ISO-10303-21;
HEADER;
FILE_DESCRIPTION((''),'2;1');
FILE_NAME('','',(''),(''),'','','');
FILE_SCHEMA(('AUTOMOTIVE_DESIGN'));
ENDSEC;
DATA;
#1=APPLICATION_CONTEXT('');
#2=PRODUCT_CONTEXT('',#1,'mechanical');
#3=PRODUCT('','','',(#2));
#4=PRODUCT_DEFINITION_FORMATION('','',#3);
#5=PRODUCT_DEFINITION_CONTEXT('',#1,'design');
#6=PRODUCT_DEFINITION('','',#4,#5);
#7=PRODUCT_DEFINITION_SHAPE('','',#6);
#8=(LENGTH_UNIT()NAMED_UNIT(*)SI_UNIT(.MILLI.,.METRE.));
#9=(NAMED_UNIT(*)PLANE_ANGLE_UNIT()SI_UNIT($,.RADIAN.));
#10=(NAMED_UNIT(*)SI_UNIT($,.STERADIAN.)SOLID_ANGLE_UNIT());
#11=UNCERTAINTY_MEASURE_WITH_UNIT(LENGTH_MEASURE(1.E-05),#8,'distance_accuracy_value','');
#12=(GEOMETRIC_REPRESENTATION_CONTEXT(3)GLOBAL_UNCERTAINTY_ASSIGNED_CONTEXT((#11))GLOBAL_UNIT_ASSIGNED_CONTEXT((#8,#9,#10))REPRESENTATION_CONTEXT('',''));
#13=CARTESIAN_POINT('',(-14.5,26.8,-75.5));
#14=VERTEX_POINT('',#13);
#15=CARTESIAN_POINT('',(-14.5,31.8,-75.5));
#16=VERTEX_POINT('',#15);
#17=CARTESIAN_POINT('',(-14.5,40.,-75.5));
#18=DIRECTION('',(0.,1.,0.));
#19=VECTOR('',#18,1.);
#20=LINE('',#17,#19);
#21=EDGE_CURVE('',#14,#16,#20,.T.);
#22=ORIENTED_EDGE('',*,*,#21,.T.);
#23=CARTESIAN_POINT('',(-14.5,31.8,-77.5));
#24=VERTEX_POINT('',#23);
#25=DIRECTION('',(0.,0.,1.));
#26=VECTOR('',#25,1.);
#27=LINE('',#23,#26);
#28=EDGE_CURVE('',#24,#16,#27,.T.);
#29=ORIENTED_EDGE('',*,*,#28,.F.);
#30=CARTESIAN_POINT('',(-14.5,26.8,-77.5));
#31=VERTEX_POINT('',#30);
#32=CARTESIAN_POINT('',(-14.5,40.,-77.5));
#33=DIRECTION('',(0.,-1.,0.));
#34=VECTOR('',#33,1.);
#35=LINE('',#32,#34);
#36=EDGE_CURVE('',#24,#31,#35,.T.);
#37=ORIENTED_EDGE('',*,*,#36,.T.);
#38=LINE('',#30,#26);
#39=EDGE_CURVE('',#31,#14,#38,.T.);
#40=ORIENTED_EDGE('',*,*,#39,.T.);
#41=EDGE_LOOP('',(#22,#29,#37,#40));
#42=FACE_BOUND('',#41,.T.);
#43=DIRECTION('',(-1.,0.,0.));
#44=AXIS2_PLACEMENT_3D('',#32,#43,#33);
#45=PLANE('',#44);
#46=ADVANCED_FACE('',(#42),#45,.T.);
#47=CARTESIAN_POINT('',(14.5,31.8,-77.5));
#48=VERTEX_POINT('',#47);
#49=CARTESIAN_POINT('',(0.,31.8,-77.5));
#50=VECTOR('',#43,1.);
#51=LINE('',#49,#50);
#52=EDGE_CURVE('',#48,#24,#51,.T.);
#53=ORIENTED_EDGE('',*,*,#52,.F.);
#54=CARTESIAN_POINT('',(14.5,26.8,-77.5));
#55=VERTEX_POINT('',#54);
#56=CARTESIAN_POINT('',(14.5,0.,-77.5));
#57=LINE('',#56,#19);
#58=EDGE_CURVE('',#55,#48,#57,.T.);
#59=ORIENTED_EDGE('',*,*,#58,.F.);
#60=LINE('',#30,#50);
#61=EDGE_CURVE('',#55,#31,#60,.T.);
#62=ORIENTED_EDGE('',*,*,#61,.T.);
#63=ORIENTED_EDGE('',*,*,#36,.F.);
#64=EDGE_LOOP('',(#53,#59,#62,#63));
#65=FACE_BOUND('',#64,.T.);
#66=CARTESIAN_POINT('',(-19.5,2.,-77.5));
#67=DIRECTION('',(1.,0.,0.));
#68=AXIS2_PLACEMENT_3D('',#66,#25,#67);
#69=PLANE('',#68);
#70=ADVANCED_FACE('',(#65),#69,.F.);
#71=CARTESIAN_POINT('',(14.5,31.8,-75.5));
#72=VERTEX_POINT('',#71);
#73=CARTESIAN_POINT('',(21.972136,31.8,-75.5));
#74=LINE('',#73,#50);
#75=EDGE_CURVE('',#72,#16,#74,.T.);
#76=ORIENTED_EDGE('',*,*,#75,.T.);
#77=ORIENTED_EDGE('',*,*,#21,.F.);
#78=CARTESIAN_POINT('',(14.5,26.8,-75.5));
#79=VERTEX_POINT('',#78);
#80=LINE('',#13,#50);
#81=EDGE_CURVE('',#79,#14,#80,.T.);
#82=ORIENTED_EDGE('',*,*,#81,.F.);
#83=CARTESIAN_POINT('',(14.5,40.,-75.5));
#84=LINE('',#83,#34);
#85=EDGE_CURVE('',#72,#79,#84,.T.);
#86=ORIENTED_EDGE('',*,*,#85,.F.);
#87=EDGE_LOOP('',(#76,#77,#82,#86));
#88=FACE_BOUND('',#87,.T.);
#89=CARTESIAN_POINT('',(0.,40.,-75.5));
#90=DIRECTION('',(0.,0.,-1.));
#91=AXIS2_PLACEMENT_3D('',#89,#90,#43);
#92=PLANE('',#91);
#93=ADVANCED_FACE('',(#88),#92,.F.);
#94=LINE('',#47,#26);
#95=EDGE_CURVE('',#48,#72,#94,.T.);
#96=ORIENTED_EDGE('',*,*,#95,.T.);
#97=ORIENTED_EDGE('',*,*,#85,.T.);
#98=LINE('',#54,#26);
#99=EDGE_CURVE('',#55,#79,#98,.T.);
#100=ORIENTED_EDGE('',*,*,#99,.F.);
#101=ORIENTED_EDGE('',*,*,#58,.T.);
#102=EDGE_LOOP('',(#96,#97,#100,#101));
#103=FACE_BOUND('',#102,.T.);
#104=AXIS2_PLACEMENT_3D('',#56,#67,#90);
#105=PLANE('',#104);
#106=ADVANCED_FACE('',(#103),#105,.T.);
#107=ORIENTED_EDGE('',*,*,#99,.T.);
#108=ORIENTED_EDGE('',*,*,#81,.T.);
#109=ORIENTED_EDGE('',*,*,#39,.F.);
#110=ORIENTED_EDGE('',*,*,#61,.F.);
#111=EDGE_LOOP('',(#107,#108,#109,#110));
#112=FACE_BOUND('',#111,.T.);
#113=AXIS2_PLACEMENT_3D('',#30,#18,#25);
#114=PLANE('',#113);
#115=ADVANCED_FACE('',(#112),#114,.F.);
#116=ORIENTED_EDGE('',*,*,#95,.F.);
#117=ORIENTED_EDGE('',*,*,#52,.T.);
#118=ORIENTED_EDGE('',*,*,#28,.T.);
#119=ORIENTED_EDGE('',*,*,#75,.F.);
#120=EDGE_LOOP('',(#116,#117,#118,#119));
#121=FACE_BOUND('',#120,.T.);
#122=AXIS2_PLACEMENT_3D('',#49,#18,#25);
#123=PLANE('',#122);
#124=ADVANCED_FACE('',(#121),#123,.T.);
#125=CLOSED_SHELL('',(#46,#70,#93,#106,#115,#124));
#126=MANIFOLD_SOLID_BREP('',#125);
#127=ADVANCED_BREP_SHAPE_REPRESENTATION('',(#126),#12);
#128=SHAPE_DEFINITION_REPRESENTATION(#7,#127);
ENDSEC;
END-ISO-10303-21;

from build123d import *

# Parameters (mm, degrees)
SKETCH1_W                       = 39
SKETCH1_H                       = 155
BOSS_EXTRUDE1_DEPTH             = 2
BOSS_EXTRUDE2_DEPTH             = 38
SKETCH3_W                       = 2
SKETCH3_H                       = 2
BOSS_EXTRUDE3_DEPTH             = 38
SKETCH4_W                       = 2
SKETCH4_H                       = 2
BOSS_EXTRUDE4_DEPTH             = 151
SKETCH6_W                       = 35
SKETCH6_H                       = 2.2
CUT_EXTRUDE1_DEPTH              = 160.340045186
SKETCH7_W                       = 35
SKETCH7_H                       = 2.2
CUT_EXTRUDE2_DEPTH              = 89.490112442
SKETCH5_W                       = 31
SKETCH5_H                       = 2
BOSS_EXTRUDE5_DEPTH             = 2
BOSS_EXTRUDE6_REACH             = 91.367
SKETCH8_W                       = 2
SKETCH8_H                       = 2
BOSS_EXTRUDE6_DIRECTION_2_REACH = 91.367
SKETCH10_W                      = 2
SKETCH10_H                      = 2.2
SKETCH10_W_2                    = 2.2
SKETCH10_H_2                    = 2
BOSS_EXTRUDE8_DEPTH             = 2
SKETCH11_W                      = 2
SKETCH11_H                      = 2.2
SKETCH11_W_2                    = 2.2
SKETCH11_H_2                    = 2
BOSS_EXTRUDE9_DEPTH             = 2
FILLET2_R                       = 2.5
SKETCH14_W                      = 36.5
SKETCH14_H                      = 7.75
BOSS_EXTRUDE10_DEPTH            = 2
SKETCH13_W                      = 31
SKETCH13_H                      = 3
CUT_EXTRUDE4_DEPTH              = 2
FILLET3_R                       = 2
FILLET4_R                       = 0.5
SKETCH15_R                      = 5.1
CUT_EXTRUDE5_DEPTH              = 90.367219941
SKETCH16_R                      = 7.1
BOSS_EXTRUDE11_DEPTH            = 1
FILLET5_R                       = 0.5
FILLET7_R                       = 0.5
CUT_EXTRUDE6_DEPTH              = 6
SKETCH18_W                      = 29
SKETCH18_H                      = 3
CUT_EXTRUDE8_DEPTH              = 90.367219986
CUT_EXTRUDE11_DEPTH             = 90.367219986
CUT_EXTRUDE11_DEPTH_BACK        = 90.367219986
SKETCH20_W                      = 5
SKETCH20_H                      = 40
CUT_EXTRUDE12_DEPTH             = 43.594013664
CUT_EXTRUDE12_DEPTH_BACK        = 43.594013664
SKETCH21_W                      = 29
SKETCH21_H                      = 8.2
SKETCH22_W                      = 29
SKETCH22_H                      = 17.8
CUT_EXTRUDE13_DEPTH             = 36.0069993


with BuildPart() as part:
    # Sketch1 → Boss-Extrude1 (new body)
    with BuildSketch(Plane(origin=(0, 0, 0), x_dir=(1, 0, 0), z_dir=(0, 1, 0))):
        Rectangle(SKETCH1_W, SKETCH1_H)
    extrude(amount=BOSS_EXTRUDE1_DEPTH)

    # Sketch2 → Boss-Extrude2 (add)
    with BuildSketch(Plane(origin=(0, 2, 0), x_dir=(1, 0, 0), z_dir=(0, 1, 0))):
        Polygon((-17.5, -77.5), (-17.5, -75.5), (-17.5, 75.5), (17.5, 75.5), (17.5, -75.5), (17.5, -77.5), (19.5, -77.5), (19.5, 77.5), (-19.5, 77.5), (-19.5, -77.5), align=None)
    extrude(amount=BOSS_EXTRUDE2_DEPTH)

    # Sketch3 → Boss-Extrude3 (add)
    with BuildSketch(Plane(origin=(0, 2, 0), x_dir=(1, 0, 0), z_dir=(0, 1, 0))):
        with Locations((-16.5, -76.5)):
            Rectangle(SKETCH3_W, SKETCH3_H)
        with Locations((-16.5, -72.3)):
            Rectangle(SKETCH3_W, SKETCH3_H)
        with Locations((16.5, -76.5)):
            Rectangle(SKETCH3_W, SKETCH3_H)
        with Locations((16.5, -72.3)):
            Rectangle(SKETCH3_W, SKETCH3_H)
    extrude(amount=BOSS_EXTRUDE3_DEPTH)

    # Sketch4 → Boss-Extrude4 (add)
    with BuildSketch(Plane.XY.offset(-75.5)):
        with Locations((-16.5, 39)):
            Rectangle(SKETCH4_W, SKETCH4_H)
        Polygon((-15.5, 33.8), (-17.5, 31.8), (-17.5, 35.8), (-15.5, 35.8), align=None)
        Polygon((15.5, 35.8), (17.5, 35.8), (17.5, 31.8), (15.5, 33.8), align=None)
        with Locations((16.5, 39)):
            Rectangle(SKETCH4_W, SKETCH4_H)
    extrude(amount=BOSS_EXTRUDE4_DEPTH)

    # Sketch6 → Cut-Extrude1 (cut, through all)
    with BuildSketch(Plane.XY.offset(-75.5)):
        with Locations((0, 36.9)):
            Rectangle(SKETCH6_W, SKETCH6_H)
    extrude(amount=CUT_EXTRUDE1_DEPTH, mode=Mode.SUBTRACT)

    # Sketch7 → Cut-Extrude2 (cut, through all)
    with BuildSketch(Plane(origin=(0, 2, 0), x_dir=(1, 0, 0), z_dir=(0, 1, 0))):
        with Locations((0, -74.4)):
            Rectangle(SKETCH7_W, SKETCH7_H)
    extrude(amount=CUT_EXTRUDE2_DEPTH, mode=Mode.SUBTRACT)

    # Sketch5 → Boss-Extrude5 (add)
    with BuildSketch(Plane(origin=(0, 2, 0), x_dir=(1, 0, 0), z_dir=(0, 1, 0))):
        with Locations((0, -76.5)):
            Rectangle(SKETCH5_W, SKETCH5_H)
        with Locations((0, -72.3)):
            Rectangle(SKETCH5_W, SKETCH5_H)
    extrude(amount=BOSS_EXTRUDE5_DEPTH)

    # Boss-Extrude6: up to this face of the body (flat: up to its plane)
    boss_extrude6_end = Plane(part.part.faces().sort_by_distance((17.5, 16.9, -2.1))[0])
    # Sketch8 → Boss-Extrude6 (add, up to the picked face)
    with BuildSketch(Plane(origin=(0, 0, 0), x_dir=(0, 0, -1), z_dir=(1, 0, 0)), mode=Mode.PRIVATE) as boss_extrude6_sk1:
        with Locations((74.5, 39)):
            Rectangle(SKETCH8_W, SKETCH8_H)
    boss_extrude6_tool1 = split(extrude(boss_extrude6_sk1.sketch, amount=BOSS_EXTRUDE6_REACH, mode=Mode.PRIVATE), bisect_by=boss_extrude6_end, keep=Keep.BOTH, mode=Mode.PRIVATE)
    # Sketch8 → Boss-Extrude6 (add, up to the picked face)
    with BuildSketch(Plane(origin=(0, 0, 0), x_dir=(0, 0, -1), z_dir=(1, 0, 0)), mode=Mode.PRIVATE) as boss_extrude6_sk2:
        Polygon((75.5, 35.8), (73.5, 35.8), (73.5, 33.8), (75.5, 31.8), align=None)
    boss_extrude6_tool2 = split(extrude(boss_extrude6_sk2.sketch, amount=BOSS_EXTRUDE6_REACH, mode=Mode.PRIVATE), bisect_by=boss_extrude6_end, keep=Keep.BOTH, mode=Mode.PRIVATE)
    add(boss_extrude6_tool1.solids().sort_by(Axis((0, 39, -74.5), (1, 0, 0)))[0])
    add(boss_extrude6_tool2.solids().sort_by(Axis((0, 34.244444, -74.611111), (1, 0, 0)))[0])

    # Boss-Extrude6 direction 2: up to this face of the body (flat: up to its plane)
    boss_extrude6_direction_2_end = Plane(part.part.faces().sort_by_distance((-17.5, 16.9, -2.1))[0])
    # Sketch8 → Boss-Extrude6 direction 2 (add, up to the picked face)
    with BuildSketch(Plane(origin=(0, 0, 0), x_dir=(0, 0, -1), z_dir=(1, 0, 0)), mode=Mode.PRIVATE) as boss_extrude6_direction_2_sk1:
        with Locations((74.5, 39)):
            Rectangle(SKETCH8_W, SKETCH8_H)
    boss_extrude6_direction_2_tool1 = split(extrude(boss_extrude6_direction_2_sk1.sketch, amount=-BOSS_EXTRUDE6_DIRECTION_2_REACH, mode=Mode.PRIVATE), bisect_by=boss_extrude6_direction_2_end, keep=Keep.BOTH, mode=Mode.PRIVATE)
    # Sketch8 → Boss-Extrude6 direction 2 (add, up to the picked face)
    with BuildSketch(Plane(origin=(0, 0, 0), x_dir=(0, 0, -1), z_dir=(1, 0, 0)), mode=Mode.PRIVATE) as boss_extrude6_direction_2_sk2:
        Polygon((75.5, 35.8), (73.5, 35.8), (73.5, 33.8), (75.5, 31.8), align=None)
    boss_extrude6_direction_2_tool2 = split(extrude(boss_extrude6_direction_2_sk2.sketch, amount=-BOSS_EXTRUDE6_DIRECTION_2_REACH, mode=Mode.PRIVATE), bisect_by=boss_extrude6_direction_2_end, keep=Keep.BOTH, mode=Mode.PRIVATE)
    add(boss_extrude6_direction_2_tool1.solids().sort_by(Axis((0, 39, -74.5), (-1, 0, 0)))[0])
    add(boss_extrude6_direction_2_tool2.solids().sort_by(Axis((0, 34.244444, -74.611111), (-1, 0, 0)))[0])

    # Sketch10 → Boss-Extrude8 (add)
    with BuildSketch(Plane(origin=(-17.5, 0, 0), x_dir=(0, 0, -1), z_dir=(1, 0, 0))):
        with Locations((-76.5, 36.9)):
            Rectangle(SKETCH10_W, SKETCH10_H)
        with Locations((-74.4, 39)):
            Rectangle(SKETCH10_W_2, SKETCH10_H_2)
    extrude(amount=BOSS_EXTRUDE8_DEPTH)

    # Sketch11 → Boss-Extrude9 (add)
    with BuildSketch(Plane.ZY.offset(-17.5)):
        with Locations((76.5, 36.9)):
            Rectangle(SKETCH11_W, SKETCH11_H)
        with Locations((74.4, 39)):
            Rectangle(SKETCH11_W_2, SKETCH11_H_2)
    extrude(amount=BOSS_EXTRUDE9_DEPTH)

    # Fillet2
    fillet2_edges = [part.edges().sort_by_distance(p)[0] for p in [
        (-17.5, 16.9, 71.3),
        (17.5, 16.9, 71.3),
        (19.5, 20, 77.5),
        (-19.5, 20, 77.5),
        (-19.5, 20, -77.5),
        (-17.5, 16.9, -75.5),
        (17.5, 16.9, -75.5),
        (19.5, 20, -77.5),
        (19.5, 40, 0),
        (-19.5, 40, 0),
        (19.5, 0, 0),
        (-19.5, 0, 0),
        (0, 40, -77.5),
        (0, 0, 77.5),
        (0, 0, -77.5),
        (-17.5, 40, 77.5),
        (17.5, 40, 77.5),
    ]]
    fillet(fillet2_edges, radius=FILLET2_R)

    # Sketch14 → Boss-Extrude10 (add)
    with BuildSketch(Plane.XY.offset(-75.5)):
        with Locations((0, 5.125)):
            Rectangle(SKETCH14_W, SKETCH14_H)
    extrude(amount=BOSS_EXTRUDE10_DEPTH)

    # Sketch13 → Cut-Extrude4 (cut)
    with BuildSketch(Plane(origin=(0, 0, -77.5), x_dir=(-1, 0, 0), z_dir=(0, 0, -1))):
        with Locations((0, 5.5)):
            Rectangle(SKETCH13_W, SKETCH13_H)
    extrude(amount=-CUT_EXTRUDE4_DEPTH, mode=Mode.SUBTRACT)

    # Fillet3
    fillet3_edges = [part.edges().sort_by_distance(p)[0] for p in [
        (0, 9, -73.5),
    ]]
    fillet(fillet3_edges, radius=FILLET3_R - 0.0001)  # a hair under: the kernel refuses the full size

    # Fillet4
    fillet4_edges = [part.edges().sort_by_distance(p)[0] for p in [
        (15.5, 5.5, -75.5),
        (15.5, 4, -76.5),
        (0, 7, -75.5),
        (15.5, 7, -76.5),
        (-15.5, 5.5, -75.5),
        (-15.5, 7, -76.5),
        (0, 4, -75.5),
        (-15.5, 4, -76.5),
        (15.5, 5.5, -77.5),
        (0, 4, -77.5),
        (-15.5, 5.5, -77.5),
        (0, 7, -77.5),
    ]]
    fillet(fillet4_edges, radius=FILLET4_R)

    # Sketch15 → Cut-Extrude5 (cut, through all)
    with BuildSketch(Plane.XZ):
        with Locations(Location((0, 38.75, 0), (0, 0, 270))):
            Circle(SKETCH15_R)
        with Locations(Location((0, -38.75, 0), (0, 0, 270))):
            Circle(SKETCH15_R)
    extrude(amount=-CUT_EXTRUDE5_DEPTH, mode=Mode.SUBTRACT)

    # Sketch16 → Boss-Extrude11 (add)
    with BuildSketch(Plane(origin=(0, 2, 0), x_dir=(1, 0, 0), z_dir=(0, 1, 0))):
        with Locations(Location((0, 38.75, 0), (0, 0, 270))):
            Circle(SKETCH16_R)
        with Locations(Location((0, -38.75, 0), (0, 0, 270))):
            Circle(SKETCH16_R)
    extrude(amount=BOSS_EXTRUDE11_DEPTH)

    # Fillet5
    fillet5_edges = [part.edges().sort_by_distance(p)[0] for p in [
        (0, 2, -45.85),
        (0, 3, -45.85),
        (0, 2, 31.65),
        (0, 3, 31.65),
    ]]
    fillet(fillet5_edges, radius=FILLET5_R - 0.0001)  # a hair under: the kernel refuses the full size

    # Fillet7
    fillet7_edges = [part.edges().sort_by_distance(p)[0] for p in [
        (15.5, 40, 0.75),
        (0, 4, 77.5),
        (0, 40, -73.5),
        (-15.5, 40, 0.75),
        (-15.5, 20.75, 77.5),
        (-15.5, 39.267766953, 76.767766953),
        (15.5, 20.75, 77.5),
        (15.5, 39.267766953, 76.767766953),
    ]]
    fillet(fillet7_edges, radius=FILLET7_R)

    # Sketch17 → Cut-Extrude6 (cut)
    with BuildSketch(Plane.XZ):
        Polygon((-17, -77.5), (-17, 70.299999999), (-14.999999999, 71.3), (-14.999999999, 77.5), (14.999999999, 77.5), (14.999999999, 71.3), (17, 70.299999999), (17, -77.5), align=None)
    extrude(amount=-CUT_EXTRUDE6_DEPTH, mode=Mode.SUBTRACT)

    # Sketch18 → Cut-Extrude8 (cut, through all)
    with BuildSketch(Plane.XY):
        with Locations((0, 7.5)):
            Rectangle(SKETCH18_W, SKETCH18_H)
    extrude(amount=-CUT_EXTRUDE8_DEPTH, mode=Mode.SUBTRACT)

    # Sketch20 → Cut-Extrude11 (cut, two sides: drawn at the far end of the back side and taken through both)
    with BuildSketch(Plane.XY.offset(-CUT_EXTRUDE11_DEPTH_BACK)):
        Polygon((19.5, 40), (14.5, 40), (14.5, 6), (14.5, 0), (19.5, 0), align=None)
        with Locations((-17, 20)):
            Rectangle(SKETCH20_W, SKETCH20_H)
    extrude(amount=CUT_EXTRUDE11_DEPTH + CUT_EXTRUDE11_DEPTH_BACK, mode=Mode.SUBTRACT)

    # Sketch21 → Cut-Extrude12 (cut, two sides: drawn at the far end of the back side and taken through both)
    with BuildSketch(Plane.XY.offset(-75.5).offset(-CUT_EXTRUDE12_DEPTH_BACK)):
        with Locations((0, 35.9)):
            Rectangle(SKETCH21_W, SKETCH21_H)
    extrude(amount=CUT_EXTRUDE12_DEPTH + CUT_EXTRUDE12_DEPTH_BACK, mode=Mode.SUBTRACT)

    # Sketch22 → Cut-Extrude13 (cut, through all)
    with BuildSketch(Plane.XY.offset(-75.5)):
        with Locations((0, 17.9)):
            Rectangle(SKETCH22_W, SKETCH22_H)
    extrude(amount=-CUT_EXTRUDE13_DEPTH, mode=Mode.SUBTRACT)


solid = part.part
